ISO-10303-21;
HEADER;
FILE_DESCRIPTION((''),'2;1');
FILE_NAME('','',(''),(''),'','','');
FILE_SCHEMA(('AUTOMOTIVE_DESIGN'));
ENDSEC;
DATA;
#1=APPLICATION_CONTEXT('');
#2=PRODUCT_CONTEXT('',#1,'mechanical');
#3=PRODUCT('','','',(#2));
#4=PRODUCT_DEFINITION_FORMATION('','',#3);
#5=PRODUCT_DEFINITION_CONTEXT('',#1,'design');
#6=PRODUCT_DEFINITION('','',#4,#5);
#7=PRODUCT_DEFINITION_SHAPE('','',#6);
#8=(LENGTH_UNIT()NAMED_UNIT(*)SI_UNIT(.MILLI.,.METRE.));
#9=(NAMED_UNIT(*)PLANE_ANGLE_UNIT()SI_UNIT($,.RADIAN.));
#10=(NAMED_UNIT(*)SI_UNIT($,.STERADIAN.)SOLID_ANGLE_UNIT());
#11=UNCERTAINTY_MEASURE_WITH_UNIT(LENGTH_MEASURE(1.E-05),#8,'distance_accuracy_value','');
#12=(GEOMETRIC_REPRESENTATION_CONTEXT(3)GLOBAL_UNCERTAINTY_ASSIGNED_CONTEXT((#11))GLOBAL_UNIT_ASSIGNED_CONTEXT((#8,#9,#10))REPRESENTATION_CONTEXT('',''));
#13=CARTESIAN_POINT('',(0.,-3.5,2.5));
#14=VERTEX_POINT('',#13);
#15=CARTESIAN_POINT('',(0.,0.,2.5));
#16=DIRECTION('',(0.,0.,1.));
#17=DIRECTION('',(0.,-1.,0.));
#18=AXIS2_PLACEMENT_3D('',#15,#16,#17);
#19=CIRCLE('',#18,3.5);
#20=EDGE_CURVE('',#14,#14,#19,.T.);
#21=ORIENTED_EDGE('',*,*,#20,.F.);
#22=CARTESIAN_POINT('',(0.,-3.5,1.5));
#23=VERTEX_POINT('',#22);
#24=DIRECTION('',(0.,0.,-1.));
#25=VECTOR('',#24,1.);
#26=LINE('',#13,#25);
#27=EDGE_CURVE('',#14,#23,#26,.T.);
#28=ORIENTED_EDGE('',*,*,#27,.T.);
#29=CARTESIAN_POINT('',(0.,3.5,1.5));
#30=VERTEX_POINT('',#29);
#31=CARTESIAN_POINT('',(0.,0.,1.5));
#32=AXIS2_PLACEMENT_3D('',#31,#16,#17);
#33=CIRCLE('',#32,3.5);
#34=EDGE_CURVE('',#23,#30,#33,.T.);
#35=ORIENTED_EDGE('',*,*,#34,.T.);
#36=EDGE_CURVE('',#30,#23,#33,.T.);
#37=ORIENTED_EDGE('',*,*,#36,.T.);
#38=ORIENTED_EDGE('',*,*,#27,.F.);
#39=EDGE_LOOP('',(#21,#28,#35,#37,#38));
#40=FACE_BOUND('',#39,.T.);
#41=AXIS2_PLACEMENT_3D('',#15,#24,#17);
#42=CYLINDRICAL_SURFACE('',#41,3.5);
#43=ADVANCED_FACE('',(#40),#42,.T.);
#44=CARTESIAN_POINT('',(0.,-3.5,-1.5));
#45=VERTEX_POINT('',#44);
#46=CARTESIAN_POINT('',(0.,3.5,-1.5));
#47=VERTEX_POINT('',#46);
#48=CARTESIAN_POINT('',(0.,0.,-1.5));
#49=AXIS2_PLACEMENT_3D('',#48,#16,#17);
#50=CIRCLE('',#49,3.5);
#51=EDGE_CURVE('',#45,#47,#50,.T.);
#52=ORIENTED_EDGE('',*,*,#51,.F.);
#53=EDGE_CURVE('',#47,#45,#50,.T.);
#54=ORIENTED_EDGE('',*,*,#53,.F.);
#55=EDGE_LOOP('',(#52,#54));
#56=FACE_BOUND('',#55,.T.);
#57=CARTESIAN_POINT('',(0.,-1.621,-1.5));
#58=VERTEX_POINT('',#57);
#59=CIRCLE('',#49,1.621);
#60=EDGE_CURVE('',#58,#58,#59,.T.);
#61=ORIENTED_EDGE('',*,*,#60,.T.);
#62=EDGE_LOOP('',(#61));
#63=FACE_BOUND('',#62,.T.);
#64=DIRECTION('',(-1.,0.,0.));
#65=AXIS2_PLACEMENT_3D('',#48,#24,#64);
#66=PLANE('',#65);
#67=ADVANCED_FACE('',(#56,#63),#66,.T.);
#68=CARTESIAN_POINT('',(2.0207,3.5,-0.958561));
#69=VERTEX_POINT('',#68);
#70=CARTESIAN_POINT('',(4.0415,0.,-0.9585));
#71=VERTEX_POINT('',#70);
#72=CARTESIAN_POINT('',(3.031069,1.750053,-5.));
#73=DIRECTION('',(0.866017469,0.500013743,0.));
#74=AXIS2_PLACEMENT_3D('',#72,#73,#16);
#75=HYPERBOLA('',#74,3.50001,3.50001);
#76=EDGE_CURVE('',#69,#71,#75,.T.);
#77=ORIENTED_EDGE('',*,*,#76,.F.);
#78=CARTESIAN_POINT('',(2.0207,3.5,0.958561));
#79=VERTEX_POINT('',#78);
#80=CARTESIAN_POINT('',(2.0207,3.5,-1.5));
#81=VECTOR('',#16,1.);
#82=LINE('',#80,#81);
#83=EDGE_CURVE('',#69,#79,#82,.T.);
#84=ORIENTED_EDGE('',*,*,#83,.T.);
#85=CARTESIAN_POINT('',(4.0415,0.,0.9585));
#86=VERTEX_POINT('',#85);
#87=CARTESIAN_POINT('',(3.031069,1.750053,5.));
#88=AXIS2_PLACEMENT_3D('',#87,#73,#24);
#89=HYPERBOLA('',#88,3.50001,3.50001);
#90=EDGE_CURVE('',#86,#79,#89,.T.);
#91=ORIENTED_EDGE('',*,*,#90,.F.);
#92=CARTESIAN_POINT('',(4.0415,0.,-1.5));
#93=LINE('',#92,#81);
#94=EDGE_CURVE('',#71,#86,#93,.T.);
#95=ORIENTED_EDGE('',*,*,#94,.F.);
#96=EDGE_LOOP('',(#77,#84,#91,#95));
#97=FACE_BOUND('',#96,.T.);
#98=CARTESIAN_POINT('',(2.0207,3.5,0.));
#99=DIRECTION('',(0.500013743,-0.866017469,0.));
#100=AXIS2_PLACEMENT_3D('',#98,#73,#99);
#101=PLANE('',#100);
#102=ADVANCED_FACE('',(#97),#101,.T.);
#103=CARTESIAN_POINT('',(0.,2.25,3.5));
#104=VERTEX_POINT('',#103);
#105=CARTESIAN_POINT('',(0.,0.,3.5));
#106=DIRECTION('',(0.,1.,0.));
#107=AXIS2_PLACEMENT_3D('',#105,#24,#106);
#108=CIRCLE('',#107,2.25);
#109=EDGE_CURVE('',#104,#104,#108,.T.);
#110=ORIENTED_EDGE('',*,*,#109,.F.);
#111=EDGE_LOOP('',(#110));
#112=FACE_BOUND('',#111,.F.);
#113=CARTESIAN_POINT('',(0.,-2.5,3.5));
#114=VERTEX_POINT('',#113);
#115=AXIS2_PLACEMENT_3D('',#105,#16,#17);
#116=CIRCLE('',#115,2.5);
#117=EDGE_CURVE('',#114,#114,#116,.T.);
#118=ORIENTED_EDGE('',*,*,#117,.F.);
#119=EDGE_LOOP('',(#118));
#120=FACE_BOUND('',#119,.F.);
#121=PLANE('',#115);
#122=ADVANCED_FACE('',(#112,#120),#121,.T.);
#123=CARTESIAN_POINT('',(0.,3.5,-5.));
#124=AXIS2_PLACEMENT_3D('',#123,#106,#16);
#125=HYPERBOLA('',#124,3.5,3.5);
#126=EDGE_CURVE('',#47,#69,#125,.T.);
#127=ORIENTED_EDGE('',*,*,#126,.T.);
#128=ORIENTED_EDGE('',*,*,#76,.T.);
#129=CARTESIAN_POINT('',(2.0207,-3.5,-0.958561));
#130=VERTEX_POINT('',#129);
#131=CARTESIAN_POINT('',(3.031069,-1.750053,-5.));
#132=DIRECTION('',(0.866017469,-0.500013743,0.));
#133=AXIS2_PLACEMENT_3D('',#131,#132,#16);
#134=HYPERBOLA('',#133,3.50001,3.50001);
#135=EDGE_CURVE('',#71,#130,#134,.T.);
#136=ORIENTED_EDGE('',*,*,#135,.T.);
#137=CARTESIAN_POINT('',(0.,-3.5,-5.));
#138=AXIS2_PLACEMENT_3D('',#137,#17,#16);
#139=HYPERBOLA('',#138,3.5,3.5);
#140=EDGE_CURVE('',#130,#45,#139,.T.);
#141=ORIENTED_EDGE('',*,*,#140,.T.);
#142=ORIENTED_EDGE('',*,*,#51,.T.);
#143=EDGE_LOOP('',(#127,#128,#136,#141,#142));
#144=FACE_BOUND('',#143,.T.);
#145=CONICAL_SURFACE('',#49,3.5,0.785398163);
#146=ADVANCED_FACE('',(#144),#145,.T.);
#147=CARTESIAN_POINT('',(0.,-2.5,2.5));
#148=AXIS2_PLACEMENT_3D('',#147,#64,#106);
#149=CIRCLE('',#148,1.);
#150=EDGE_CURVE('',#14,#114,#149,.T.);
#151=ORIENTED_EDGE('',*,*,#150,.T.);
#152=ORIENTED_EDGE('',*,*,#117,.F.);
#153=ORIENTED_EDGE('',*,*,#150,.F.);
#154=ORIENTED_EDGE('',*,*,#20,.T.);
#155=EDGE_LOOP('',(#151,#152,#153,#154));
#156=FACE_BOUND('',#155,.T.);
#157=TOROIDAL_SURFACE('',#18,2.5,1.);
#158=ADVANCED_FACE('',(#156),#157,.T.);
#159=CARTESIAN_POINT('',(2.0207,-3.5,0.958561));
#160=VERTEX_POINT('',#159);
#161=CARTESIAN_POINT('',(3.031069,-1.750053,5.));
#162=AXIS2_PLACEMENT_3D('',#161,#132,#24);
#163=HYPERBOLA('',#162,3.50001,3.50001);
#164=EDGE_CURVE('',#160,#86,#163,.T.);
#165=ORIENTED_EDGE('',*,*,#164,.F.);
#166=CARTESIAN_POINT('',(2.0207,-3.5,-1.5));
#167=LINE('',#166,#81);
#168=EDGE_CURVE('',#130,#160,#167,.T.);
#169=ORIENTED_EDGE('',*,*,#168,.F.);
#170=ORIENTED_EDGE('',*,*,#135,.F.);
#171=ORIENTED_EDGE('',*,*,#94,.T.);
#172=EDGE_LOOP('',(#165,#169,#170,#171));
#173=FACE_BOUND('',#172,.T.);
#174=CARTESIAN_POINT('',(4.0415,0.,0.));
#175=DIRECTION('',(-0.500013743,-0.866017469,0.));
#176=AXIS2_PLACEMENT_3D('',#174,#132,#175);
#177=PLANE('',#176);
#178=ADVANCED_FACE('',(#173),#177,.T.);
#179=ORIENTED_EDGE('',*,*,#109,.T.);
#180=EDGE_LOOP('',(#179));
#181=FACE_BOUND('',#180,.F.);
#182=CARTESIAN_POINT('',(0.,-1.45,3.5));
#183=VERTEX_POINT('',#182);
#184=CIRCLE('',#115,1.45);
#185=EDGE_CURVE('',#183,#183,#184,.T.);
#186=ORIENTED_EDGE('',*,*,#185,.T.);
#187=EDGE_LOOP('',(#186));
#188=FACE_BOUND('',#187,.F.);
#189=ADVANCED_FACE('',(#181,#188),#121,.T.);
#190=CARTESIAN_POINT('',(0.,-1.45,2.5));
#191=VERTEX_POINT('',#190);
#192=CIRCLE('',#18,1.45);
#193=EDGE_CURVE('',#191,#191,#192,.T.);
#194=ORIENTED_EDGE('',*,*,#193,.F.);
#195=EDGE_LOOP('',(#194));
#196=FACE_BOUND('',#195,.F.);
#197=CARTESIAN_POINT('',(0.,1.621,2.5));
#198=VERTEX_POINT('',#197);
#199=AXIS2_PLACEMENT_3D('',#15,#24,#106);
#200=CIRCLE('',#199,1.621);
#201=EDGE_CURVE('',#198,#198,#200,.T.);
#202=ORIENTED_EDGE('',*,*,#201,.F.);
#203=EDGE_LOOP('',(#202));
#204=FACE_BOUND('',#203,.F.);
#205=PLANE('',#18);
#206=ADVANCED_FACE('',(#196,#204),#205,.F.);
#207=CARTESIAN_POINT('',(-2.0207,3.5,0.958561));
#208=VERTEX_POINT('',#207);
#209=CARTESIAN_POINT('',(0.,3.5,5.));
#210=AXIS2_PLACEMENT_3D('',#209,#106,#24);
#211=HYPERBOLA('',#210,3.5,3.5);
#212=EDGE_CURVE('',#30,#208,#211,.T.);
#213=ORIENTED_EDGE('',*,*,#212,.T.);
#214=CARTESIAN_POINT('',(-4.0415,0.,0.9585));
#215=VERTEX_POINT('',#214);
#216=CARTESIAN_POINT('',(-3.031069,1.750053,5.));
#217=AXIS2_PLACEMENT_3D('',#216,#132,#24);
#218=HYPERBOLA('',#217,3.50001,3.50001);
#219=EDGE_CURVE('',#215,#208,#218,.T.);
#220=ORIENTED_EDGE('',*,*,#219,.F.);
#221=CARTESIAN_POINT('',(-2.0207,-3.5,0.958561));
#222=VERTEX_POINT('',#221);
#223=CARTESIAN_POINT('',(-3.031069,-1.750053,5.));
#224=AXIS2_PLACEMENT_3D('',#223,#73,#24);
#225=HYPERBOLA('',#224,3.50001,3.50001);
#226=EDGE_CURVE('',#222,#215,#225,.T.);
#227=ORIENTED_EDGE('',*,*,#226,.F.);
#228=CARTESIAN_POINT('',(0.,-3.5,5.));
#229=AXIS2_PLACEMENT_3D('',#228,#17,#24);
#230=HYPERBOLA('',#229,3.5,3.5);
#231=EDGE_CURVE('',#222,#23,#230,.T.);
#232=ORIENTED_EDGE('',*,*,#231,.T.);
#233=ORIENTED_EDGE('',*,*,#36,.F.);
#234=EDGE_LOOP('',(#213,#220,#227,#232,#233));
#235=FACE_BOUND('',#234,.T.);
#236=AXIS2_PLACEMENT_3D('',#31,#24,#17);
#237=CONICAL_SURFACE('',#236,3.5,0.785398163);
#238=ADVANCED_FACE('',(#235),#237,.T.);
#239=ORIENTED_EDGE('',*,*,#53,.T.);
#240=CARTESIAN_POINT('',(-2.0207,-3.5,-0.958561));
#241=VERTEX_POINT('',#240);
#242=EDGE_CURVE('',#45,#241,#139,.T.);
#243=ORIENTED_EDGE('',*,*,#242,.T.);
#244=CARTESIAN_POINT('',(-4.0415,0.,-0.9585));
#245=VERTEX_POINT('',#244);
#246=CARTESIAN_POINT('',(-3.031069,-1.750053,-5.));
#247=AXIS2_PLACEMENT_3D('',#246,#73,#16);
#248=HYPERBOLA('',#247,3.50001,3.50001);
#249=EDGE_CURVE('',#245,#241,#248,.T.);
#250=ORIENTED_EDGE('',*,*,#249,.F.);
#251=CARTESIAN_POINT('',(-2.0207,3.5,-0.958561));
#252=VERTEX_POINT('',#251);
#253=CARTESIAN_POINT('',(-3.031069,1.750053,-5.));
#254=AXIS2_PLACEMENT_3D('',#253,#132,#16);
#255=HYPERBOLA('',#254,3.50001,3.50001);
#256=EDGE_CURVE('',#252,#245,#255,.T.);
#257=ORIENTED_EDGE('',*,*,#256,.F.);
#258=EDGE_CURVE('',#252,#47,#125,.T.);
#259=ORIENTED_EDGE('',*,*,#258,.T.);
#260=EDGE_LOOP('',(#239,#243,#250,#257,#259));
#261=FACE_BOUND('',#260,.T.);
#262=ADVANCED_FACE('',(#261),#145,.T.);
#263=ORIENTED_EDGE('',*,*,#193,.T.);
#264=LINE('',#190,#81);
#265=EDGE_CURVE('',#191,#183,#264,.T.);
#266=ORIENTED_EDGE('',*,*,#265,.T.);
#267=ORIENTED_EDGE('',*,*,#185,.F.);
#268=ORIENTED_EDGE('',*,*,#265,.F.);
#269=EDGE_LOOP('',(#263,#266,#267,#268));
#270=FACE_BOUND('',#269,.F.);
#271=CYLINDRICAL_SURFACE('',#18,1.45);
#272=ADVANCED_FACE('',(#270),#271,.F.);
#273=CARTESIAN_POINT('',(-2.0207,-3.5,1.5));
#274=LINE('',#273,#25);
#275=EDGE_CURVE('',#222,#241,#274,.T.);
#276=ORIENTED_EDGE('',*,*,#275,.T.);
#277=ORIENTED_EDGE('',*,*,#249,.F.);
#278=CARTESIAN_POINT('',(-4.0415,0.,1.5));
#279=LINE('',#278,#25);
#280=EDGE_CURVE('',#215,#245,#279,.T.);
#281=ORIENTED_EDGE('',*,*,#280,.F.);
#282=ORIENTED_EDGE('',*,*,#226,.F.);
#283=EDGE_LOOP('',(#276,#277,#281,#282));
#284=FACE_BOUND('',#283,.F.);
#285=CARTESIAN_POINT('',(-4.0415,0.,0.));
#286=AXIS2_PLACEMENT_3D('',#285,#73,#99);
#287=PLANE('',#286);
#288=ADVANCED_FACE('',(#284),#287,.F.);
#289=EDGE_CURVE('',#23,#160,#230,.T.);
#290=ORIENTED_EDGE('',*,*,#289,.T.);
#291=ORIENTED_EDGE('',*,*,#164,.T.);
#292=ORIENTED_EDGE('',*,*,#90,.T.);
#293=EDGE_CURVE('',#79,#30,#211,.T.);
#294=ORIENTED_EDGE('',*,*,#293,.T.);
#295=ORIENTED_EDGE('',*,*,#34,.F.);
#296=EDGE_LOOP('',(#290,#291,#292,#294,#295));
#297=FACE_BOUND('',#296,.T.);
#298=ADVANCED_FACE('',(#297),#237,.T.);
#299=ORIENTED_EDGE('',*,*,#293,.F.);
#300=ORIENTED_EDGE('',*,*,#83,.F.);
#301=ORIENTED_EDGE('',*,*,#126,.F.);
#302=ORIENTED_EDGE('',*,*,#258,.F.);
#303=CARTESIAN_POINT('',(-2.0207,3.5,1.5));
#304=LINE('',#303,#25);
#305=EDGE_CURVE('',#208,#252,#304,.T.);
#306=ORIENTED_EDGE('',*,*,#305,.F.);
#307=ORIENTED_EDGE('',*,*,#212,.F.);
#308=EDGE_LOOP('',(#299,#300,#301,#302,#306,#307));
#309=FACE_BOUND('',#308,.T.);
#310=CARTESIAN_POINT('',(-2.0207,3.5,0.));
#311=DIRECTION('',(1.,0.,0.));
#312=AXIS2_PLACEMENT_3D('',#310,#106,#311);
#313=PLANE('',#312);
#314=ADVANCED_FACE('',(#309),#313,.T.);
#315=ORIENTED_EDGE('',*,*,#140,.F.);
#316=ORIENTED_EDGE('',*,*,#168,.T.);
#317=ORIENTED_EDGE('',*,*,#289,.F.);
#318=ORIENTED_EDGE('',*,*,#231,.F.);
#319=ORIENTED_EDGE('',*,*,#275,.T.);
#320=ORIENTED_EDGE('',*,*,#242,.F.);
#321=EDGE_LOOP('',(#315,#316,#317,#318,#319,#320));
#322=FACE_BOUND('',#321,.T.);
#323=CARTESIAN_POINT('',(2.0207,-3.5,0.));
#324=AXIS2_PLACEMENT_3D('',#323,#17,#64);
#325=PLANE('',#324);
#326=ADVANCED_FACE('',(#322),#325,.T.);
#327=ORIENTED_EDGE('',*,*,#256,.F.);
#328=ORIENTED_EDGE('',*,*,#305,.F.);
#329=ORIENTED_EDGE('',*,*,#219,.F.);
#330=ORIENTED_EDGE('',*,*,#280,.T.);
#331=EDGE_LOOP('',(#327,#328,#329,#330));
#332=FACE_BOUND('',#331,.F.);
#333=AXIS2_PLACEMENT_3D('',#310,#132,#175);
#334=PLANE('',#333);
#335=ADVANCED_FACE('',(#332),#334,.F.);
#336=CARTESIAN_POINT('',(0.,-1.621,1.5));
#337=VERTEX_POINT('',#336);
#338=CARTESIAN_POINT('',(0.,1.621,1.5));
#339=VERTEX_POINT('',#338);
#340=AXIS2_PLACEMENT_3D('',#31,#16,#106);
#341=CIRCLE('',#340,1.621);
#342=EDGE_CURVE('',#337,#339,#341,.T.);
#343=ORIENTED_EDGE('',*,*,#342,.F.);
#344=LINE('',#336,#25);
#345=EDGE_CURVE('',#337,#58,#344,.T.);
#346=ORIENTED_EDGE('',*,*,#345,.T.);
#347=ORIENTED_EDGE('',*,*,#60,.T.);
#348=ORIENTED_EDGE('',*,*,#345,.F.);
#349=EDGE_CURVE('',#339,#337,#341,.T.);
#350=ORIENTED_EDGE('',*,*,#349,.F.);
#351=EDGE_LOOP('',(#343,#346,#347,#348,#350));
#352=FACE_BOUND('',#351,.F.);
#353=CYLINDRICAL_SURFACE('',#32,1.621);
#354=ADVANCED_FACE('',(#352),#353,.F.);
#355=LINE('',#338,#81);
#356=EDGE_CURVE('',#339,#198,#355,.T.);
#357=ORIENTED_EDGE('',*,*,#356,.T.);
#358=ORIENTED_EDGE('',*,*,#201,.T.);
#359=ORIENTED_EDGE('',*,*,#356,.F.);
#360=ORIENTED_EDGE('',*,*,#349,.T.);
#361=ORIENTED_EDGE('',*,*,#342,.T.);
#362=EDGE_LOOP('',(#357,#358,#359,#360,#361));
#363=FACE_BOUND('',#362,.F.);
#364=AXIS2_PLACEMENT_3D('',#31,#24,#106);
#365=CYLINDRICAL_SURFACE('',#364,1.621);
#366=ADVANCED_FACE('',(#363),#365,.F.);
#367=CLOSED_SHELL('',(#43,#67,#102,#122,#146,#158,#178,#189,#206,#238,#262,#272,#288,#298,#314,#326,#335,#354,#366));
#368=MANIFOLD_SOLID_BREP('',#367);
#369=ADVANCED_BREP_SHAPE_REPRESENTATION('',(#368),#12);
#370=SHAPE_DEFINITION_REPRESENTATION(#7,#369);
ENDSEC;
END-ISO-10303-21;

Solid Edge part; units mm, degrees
sketch "Sketch1" plane through (0, 0, 0) normal (0, 0, 1) x (1, 0, 0)
  line L0 (2.0207, -3.5) -> (-2.0207, -3.5)
  line L1 (-4.0415, 0) -> (-2.0207, -3.5)
  line L2 (-2.0207, 3.5) -> (-4.0415, 0)
  line L3 (-2.0207, 3.5) -> (2.0207, 3.5)
  line L4 (2.0207, 3.5) -> (4.0415, 0)
  line L5 (4.0415, 0) -> (2.0207, -3.5)
extrude "Protrusion1" add sketch "Sketch1" along normal mid plane 3
sketch "Sketch2" plane through (0, 0, 0) normal (1, 0, 0) x (0, 1, 0)
  line L0 (-3.5, 1.5) -> (-1.7635, 3.2365)
revolve "RevolvedCutout1" cut sketch "Sketch2" angle 360 about axis through (0, 0, -57) along (0, 0, 1) material side at (0, -2.6671, 2.4036)
mirror "Mirror1" about plane through (0, 0, 0) normal (0, 0, 1) of "RevolvedCutout1"
sketch "Sketch3" plane through (0, 0, 0) normal (1, 0, 0) x (0, 1, 0)
  line L0 (0, 1.5) -> (0, 3.5)
  line L1 (0, 3.5) -> (-2.5, 3.5)
  arc A0 (-3.5, 2.5) -> (-2.5, 3.5) centre (-2.5, 2.5) cw
  line L2 (-3.5, 2.5) -> (-3.5, 1.5)
  line L3 (-3.5, 1.5) -> (0, 1.5)
  dimension "D1" = 2
revolve "RevolvedProtrusion1" add sketch "Sketch3" angle 360 about axis through (0, 0, -57) along (0, 0, 1)
hole "Hole_1" at (0, 0, 1.5) direction (0, 0, 1) diameter 3.242 end through all both ways yes
sketch "Sketch4" plane through (0, 0, 3.5) normal (0, 0, 1) x (0, 1, 0)
  circle A0 centre (0, 0) radius 2.25
extrude "ExtrudedCutout_1" cut sketch "Sketch4" against normal blind 1
sketch "Sketch5" plane through (0, 0, 0) normal (1, 0, 0) x (0, 1, 0)
  line L0 (-2.25, 2.5) -> (-1.45, 2.5)
  line L1 (-1.45, 2.5) -> (-1.45, 3.5)
  line L2 (-1.45, 3.5) -> (-2.25, 3.5)
  line L3 (-2.25, 3.5) -> (-2.25, 2.5)
revolve "RevolvedProtrusion2" add sketch "Sketch5" angle 360 about axis through (0, 0, -57) along (0, 0, 1)
properties material "Stainless steel"
